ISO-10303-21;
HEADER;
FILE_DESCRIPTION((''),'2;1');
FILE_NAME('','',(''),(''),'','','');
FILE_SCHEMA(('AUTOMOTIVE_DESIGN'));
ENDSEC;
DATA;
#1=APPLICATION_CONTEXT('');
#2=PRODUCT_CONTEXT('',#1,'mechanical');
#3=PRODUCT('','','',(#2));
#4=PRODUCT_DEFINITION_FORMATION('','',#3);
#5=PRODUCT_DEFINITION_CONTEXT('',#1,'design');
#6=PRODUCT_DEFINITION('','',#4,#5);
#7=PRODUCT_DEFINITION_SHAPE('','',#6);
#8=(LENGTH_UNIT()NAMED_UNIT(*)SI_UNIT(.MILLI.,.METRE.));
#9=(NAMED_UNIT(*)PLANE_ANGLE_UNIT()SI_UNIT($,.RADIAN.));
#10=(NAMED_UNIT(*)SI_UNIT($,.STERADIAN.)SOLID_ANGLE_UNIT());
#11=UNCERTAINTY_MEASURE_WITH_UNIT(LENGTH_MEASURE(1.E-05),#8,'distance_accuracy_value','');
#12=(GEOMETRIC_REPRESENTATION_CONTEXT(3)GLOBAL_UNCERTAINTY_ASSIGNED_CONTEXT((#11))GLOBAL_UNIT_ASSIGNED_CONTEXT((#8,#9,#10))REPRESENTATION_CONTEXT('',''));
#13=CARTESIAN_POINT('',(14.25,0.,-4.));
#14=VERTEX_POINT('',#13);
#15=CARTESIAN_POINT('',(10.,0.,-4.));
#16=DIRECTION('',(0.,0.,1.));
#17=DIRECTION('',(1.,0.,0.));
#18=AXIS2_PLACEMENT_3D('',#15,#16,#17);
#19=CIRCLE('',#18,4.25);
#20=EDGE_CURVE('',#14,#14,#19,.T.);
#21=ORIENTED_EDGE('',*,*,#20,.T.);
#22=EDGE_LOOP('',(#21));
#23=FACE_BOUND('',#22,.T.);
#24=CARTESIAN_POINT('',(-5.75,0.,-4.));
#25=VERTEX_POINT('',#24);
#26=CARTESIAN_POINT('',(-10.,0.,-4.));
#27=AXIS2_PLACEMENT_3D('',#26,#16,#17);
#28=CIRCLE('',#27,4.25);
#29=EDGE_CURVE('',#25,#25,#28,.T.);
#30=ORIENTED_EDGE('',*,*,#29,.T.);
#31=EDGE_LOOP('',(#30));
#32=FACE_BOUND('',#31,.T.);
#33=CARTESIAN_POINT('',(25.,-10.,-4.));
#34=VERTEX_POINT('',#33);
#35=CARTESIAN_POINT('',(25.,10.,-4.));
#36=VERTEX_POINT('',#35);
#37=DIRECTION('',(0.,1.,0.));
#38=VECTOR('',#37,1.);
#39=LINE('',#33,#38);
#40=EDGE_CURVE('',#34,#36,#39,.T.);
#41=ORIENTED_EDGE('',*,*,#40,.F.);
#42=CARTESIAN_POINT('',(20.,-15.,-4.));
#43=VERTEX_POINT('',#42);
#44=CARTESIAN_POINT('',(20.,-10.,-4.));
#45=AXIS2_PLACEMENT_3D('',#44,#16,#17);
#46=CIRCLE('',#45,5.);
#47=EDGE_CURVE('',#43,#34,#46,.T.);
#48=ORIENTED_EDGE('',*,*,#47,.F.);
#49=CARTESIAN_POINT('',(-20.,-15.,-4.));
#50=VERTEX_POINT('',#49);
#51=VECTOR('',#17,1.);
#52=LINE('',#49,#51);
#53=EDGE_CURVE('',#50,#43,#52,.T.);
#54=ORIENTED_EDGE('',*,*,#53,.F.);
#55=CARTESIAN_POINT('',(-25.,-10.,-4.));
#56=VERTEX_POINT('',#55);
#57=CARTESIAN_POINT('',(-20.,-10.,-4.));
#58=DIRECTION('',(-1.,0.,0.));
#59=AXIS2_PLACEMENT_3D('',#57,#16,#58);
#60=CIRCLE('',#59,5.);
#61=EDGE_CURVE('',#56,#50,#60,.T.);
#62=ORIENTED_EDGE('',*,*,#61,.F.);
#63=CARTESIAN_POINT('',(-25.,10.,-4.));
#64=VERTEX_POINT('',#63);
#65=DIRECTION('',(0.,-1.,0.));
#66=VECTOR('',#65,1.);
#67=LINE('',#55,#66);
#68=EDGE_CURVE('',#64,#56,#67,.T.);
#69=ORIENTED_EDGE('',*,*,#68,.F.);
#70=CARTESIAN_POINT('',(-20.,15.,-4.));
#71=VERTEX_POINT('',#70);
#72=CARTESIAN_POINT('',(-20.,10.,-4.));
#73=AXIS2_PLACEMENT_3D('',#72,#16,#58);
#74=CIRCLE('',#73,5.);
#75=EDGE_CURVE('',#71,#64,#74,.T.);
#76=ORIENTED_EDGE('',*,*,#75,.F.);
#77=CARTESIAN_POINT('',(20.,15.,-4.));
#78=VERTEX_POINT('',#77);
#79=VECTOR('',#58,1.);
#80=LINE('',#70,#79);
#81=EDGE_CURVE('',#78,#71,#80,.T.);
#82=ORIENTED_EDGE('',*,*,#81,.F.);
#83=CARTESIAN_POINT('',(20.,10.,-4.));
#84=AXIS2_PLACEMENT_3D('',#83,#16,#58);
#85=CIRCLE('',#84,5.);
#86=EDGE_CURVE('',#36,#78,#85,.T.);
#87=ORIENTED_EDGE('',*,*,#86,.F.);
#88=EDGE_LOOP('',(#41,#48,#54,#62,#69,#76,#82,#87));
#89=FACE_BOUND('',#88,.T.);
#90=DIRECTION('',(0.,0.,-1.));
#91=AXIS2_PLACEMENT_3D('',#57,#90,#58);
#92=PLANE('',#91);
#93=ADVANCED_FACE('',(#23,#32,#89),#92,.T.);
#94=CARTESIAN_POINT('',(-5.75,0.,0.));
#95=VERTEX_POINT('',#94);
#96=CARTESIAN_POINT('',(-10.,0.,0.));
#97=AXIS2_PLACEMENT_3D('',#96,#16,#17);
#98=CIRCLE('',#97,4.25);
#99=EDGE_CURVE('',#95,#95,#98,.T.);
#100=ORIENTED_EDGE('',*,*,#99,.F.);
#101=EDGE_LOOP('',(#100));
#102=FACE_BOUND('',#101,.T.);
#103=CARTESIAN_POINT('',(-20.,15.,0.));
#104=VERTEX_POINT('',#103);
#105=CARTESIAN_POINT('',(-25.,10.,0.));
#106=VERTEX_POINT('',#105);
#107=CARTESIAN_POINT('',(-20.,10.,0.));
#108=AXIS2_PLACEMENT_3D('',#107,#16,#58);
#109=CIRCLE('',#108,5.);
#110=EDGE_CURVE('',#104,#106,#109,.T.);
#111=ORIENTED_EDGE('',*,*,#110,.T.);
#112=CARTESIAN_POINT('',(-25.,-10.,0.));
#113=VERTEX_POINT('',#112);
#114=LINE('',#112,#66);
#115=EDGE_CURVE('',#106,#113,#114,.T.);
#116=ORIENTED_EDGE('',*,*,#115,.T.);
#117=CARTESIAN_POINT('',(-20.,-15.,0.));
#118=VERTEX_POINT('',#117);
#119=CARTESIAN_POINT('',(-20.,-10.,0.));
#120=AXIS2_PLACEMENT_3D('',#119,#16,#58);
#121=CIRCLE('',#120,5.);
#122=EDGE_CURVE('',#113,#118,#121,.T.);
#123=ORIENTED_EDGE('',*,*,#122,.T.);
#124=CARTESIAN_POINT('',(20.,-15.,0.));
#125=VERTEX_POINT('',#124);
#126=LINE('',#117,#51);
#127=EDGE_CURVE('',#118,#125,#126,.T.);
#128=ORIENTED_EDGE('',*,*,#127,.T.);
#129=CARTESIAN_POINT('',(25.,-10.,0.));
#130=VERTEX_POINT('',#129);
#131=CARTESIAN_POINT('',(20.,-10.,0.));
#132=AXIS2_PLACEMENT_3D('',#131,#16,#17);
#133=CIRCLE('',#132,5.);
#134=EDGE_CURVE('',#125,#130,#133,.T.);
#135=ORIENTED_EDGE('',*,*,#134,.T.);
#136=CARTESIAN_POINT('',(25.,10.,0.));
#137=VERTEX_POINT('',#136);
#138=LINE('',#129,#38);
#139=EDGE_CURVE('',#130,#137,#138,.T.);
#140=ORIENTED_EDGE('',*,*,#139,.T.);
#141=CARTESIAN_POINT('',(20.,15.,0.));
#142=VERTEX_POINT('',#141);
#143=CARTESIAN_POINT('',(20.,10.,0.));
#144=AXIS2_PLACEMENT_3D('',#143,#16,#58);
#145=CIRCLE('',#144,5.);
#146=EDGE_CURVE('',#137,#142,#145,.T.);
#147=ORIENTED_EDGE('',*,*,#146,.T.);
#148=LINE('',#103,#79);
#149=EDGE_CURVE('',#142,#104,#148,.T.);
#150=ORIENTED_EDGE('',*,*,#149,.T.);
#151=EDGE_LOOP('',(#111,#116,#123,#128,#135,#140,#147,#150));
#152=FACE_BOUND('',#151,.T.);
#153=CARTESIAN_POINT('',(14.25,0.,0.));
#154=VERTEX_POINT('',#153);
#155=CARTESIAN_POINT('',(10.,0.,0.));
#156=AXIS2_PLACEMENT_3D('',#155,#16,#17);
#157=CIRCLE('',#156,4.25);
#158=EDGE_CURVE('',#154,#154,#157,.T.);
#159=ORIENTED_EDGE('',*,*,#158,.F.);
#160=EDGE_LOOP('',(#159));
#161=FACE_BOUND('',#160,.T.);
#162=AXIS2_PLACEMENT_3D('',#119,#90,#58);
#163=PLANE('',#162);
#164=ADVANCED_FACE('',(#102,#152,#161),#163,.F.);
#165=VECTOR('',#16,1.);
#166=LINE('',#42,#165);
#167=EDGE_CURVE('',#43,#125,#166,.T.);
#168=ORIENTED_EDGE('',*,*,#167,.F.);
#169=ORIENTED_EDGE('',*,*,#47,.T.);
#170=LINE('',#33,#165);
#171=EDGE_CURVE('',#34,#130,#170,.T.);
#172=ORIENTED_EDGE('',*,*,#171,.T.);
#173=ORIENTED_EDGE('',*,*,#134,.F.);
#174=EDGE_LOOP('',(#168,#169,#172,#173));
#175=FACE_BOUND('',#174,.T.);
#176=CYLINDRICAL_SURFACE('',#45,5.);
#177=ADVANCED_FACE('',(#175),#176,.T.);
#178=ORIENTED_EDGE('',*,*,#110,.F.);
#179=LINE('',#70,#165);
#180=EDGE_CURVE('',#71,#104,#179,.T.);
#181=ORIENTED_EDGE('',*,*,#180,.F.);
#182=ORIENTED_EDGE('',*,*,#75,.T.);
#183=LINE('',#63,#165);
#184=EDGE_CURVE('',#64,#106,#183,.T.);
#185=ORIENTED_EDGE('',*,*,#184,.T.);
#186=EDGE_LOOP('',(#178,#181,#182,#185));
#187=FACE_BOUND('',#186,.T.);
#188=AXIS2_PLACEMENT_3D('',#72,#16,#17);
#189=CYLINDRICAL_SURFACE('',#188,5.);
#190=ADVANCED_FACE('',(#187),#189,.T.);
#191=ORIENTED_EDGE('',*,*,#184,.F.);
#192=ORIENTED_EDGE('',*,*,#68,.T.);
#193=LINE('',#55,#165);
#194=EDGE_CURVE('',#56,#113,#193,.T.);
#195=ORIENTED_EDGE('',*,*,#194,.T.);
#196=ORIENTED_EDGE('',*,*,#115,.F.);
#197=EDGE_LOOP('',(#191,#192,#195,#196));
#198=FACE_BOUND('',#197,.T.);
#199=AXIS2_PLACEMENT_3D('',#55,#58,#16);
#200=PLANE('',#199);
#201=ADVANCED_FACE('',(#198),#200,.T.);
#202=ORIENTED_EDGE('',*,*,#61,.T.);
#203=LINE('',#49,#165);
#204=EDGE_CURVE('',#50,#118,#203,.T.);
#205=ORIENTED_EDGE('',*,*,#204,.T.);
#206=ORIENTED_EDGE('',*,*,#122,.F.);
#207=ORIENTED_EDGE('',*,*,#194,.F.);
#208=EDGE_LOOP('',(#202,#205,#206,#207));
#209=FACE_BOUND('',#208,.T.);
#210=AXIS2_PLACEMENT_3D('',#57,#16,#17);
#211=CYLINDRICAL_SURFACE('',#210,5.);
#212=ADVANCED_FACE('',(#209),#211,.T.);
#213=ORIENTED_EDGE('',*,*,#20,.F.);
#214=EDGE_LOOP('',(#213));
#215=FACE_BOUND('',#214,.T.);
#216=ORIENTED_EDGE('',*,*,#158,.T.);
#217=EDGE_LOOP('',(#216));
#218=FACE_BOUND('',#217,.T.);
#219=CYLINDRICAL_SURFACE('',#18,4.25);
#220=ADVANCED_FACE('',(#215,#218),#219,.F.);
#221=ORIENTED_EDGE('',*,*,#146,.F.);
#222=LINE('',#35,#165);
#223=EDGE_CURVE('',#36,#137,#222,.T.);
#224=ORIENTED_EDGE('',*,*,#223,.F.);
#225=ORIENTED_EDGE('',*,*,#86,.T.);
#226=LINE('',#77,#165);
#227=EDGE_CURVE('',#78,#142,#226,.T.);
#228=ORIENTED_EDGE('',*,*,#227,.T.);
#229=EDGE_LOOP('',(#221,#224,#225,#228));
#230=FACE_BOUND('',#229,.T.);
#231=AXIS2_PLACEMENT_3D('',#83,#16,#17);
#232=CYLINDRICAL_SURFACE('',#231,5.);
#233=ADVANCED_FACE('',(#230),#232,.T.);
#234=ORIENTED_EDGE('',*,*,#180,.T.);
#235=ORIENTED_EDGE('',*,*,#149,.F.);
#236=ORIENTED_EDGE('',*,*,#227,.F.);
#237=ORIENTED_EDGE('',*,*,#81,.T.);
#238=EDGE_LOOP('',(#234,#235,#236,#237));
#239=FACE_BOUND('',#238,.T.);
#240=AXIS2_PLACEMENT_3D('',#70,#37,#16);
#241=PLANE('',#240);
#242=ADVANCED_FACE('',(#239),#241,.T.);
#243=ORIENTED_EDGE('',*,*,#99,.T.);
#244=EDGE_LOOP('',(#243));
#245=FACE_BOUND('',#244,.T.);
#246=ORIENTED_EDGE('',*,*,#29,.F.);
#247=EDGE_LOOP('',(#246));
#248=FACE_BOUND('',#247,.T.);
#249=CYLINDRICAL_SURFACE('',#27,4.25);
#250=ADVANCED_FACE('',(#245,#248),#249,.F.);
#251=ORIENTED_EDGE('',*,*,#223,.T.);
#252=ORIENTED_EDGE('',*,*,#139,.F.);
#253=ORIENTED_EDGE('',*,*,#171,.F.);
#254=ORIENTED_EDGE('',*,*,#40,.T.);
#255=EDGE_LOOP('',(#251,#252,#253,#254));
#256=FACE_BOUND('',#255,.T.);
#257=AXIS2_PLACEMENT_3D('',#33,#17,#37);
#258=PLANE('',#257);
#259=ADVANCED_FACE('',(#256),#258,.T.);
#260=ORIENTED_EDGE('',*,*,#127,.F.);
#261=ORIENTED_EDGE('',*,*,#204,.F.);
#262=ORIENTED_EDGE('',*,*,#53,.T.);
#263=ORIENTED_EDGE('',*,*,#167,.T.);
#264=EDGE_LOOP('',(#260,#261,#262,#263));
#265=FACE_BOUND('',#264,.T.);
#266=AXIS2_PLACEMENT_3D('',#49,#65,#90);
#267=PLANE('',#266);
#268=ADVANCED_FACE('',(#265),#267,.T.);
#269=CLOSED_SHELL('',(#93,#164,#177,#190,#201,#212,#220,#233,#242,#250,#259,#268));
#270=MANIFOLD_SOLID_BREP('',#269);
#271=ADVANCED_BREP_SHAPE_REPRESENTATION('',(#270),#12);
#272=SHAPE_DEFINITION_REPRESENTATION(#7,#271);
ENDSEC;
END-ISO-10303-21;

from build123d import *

# Parameters (mm, degrees)
SKETCH1_R          = 4.25
BASE_FLANGE1_DEPTH = 4


# Sheet-metal steps are written as plain solids
with BuildPart() as part:
    # Sketch1 → Base-Flange1 (new body)
    with BuildSketch(Plane.XY):
        with BuildLine():
            Line((-20, -15), (20, -15))
            ThreePointArc((20, -15), (23.535533906, -13.535533906), (25, -10))
            Line((25, -10), (25, 10))
            ThreePointArc((25, 10), (23.535533906, 13.535533906), (20, 15))
            Line((20, 15), (-20, 15))
            ThreePointArc((-20, 15), (-23.535533906, 13.535533906), (-25, 10))
            Line((-25, 10), (-25, -10))
            ThreePointArc((-25, -10), (-23.535533906, -13.535533906), (-20, -15))
        make_face()
        with Locations((-10, 0)):
            Circle(SKETCH1_R, mode=Mode.SUBTRACT)
        with Locations((10, 0)):
            Circle(SKETCH1_R, mode=Mode.SUBTRACT)
    extrude(amount=-BASE_FLANGE1_DEPTH)


solid = part.part
